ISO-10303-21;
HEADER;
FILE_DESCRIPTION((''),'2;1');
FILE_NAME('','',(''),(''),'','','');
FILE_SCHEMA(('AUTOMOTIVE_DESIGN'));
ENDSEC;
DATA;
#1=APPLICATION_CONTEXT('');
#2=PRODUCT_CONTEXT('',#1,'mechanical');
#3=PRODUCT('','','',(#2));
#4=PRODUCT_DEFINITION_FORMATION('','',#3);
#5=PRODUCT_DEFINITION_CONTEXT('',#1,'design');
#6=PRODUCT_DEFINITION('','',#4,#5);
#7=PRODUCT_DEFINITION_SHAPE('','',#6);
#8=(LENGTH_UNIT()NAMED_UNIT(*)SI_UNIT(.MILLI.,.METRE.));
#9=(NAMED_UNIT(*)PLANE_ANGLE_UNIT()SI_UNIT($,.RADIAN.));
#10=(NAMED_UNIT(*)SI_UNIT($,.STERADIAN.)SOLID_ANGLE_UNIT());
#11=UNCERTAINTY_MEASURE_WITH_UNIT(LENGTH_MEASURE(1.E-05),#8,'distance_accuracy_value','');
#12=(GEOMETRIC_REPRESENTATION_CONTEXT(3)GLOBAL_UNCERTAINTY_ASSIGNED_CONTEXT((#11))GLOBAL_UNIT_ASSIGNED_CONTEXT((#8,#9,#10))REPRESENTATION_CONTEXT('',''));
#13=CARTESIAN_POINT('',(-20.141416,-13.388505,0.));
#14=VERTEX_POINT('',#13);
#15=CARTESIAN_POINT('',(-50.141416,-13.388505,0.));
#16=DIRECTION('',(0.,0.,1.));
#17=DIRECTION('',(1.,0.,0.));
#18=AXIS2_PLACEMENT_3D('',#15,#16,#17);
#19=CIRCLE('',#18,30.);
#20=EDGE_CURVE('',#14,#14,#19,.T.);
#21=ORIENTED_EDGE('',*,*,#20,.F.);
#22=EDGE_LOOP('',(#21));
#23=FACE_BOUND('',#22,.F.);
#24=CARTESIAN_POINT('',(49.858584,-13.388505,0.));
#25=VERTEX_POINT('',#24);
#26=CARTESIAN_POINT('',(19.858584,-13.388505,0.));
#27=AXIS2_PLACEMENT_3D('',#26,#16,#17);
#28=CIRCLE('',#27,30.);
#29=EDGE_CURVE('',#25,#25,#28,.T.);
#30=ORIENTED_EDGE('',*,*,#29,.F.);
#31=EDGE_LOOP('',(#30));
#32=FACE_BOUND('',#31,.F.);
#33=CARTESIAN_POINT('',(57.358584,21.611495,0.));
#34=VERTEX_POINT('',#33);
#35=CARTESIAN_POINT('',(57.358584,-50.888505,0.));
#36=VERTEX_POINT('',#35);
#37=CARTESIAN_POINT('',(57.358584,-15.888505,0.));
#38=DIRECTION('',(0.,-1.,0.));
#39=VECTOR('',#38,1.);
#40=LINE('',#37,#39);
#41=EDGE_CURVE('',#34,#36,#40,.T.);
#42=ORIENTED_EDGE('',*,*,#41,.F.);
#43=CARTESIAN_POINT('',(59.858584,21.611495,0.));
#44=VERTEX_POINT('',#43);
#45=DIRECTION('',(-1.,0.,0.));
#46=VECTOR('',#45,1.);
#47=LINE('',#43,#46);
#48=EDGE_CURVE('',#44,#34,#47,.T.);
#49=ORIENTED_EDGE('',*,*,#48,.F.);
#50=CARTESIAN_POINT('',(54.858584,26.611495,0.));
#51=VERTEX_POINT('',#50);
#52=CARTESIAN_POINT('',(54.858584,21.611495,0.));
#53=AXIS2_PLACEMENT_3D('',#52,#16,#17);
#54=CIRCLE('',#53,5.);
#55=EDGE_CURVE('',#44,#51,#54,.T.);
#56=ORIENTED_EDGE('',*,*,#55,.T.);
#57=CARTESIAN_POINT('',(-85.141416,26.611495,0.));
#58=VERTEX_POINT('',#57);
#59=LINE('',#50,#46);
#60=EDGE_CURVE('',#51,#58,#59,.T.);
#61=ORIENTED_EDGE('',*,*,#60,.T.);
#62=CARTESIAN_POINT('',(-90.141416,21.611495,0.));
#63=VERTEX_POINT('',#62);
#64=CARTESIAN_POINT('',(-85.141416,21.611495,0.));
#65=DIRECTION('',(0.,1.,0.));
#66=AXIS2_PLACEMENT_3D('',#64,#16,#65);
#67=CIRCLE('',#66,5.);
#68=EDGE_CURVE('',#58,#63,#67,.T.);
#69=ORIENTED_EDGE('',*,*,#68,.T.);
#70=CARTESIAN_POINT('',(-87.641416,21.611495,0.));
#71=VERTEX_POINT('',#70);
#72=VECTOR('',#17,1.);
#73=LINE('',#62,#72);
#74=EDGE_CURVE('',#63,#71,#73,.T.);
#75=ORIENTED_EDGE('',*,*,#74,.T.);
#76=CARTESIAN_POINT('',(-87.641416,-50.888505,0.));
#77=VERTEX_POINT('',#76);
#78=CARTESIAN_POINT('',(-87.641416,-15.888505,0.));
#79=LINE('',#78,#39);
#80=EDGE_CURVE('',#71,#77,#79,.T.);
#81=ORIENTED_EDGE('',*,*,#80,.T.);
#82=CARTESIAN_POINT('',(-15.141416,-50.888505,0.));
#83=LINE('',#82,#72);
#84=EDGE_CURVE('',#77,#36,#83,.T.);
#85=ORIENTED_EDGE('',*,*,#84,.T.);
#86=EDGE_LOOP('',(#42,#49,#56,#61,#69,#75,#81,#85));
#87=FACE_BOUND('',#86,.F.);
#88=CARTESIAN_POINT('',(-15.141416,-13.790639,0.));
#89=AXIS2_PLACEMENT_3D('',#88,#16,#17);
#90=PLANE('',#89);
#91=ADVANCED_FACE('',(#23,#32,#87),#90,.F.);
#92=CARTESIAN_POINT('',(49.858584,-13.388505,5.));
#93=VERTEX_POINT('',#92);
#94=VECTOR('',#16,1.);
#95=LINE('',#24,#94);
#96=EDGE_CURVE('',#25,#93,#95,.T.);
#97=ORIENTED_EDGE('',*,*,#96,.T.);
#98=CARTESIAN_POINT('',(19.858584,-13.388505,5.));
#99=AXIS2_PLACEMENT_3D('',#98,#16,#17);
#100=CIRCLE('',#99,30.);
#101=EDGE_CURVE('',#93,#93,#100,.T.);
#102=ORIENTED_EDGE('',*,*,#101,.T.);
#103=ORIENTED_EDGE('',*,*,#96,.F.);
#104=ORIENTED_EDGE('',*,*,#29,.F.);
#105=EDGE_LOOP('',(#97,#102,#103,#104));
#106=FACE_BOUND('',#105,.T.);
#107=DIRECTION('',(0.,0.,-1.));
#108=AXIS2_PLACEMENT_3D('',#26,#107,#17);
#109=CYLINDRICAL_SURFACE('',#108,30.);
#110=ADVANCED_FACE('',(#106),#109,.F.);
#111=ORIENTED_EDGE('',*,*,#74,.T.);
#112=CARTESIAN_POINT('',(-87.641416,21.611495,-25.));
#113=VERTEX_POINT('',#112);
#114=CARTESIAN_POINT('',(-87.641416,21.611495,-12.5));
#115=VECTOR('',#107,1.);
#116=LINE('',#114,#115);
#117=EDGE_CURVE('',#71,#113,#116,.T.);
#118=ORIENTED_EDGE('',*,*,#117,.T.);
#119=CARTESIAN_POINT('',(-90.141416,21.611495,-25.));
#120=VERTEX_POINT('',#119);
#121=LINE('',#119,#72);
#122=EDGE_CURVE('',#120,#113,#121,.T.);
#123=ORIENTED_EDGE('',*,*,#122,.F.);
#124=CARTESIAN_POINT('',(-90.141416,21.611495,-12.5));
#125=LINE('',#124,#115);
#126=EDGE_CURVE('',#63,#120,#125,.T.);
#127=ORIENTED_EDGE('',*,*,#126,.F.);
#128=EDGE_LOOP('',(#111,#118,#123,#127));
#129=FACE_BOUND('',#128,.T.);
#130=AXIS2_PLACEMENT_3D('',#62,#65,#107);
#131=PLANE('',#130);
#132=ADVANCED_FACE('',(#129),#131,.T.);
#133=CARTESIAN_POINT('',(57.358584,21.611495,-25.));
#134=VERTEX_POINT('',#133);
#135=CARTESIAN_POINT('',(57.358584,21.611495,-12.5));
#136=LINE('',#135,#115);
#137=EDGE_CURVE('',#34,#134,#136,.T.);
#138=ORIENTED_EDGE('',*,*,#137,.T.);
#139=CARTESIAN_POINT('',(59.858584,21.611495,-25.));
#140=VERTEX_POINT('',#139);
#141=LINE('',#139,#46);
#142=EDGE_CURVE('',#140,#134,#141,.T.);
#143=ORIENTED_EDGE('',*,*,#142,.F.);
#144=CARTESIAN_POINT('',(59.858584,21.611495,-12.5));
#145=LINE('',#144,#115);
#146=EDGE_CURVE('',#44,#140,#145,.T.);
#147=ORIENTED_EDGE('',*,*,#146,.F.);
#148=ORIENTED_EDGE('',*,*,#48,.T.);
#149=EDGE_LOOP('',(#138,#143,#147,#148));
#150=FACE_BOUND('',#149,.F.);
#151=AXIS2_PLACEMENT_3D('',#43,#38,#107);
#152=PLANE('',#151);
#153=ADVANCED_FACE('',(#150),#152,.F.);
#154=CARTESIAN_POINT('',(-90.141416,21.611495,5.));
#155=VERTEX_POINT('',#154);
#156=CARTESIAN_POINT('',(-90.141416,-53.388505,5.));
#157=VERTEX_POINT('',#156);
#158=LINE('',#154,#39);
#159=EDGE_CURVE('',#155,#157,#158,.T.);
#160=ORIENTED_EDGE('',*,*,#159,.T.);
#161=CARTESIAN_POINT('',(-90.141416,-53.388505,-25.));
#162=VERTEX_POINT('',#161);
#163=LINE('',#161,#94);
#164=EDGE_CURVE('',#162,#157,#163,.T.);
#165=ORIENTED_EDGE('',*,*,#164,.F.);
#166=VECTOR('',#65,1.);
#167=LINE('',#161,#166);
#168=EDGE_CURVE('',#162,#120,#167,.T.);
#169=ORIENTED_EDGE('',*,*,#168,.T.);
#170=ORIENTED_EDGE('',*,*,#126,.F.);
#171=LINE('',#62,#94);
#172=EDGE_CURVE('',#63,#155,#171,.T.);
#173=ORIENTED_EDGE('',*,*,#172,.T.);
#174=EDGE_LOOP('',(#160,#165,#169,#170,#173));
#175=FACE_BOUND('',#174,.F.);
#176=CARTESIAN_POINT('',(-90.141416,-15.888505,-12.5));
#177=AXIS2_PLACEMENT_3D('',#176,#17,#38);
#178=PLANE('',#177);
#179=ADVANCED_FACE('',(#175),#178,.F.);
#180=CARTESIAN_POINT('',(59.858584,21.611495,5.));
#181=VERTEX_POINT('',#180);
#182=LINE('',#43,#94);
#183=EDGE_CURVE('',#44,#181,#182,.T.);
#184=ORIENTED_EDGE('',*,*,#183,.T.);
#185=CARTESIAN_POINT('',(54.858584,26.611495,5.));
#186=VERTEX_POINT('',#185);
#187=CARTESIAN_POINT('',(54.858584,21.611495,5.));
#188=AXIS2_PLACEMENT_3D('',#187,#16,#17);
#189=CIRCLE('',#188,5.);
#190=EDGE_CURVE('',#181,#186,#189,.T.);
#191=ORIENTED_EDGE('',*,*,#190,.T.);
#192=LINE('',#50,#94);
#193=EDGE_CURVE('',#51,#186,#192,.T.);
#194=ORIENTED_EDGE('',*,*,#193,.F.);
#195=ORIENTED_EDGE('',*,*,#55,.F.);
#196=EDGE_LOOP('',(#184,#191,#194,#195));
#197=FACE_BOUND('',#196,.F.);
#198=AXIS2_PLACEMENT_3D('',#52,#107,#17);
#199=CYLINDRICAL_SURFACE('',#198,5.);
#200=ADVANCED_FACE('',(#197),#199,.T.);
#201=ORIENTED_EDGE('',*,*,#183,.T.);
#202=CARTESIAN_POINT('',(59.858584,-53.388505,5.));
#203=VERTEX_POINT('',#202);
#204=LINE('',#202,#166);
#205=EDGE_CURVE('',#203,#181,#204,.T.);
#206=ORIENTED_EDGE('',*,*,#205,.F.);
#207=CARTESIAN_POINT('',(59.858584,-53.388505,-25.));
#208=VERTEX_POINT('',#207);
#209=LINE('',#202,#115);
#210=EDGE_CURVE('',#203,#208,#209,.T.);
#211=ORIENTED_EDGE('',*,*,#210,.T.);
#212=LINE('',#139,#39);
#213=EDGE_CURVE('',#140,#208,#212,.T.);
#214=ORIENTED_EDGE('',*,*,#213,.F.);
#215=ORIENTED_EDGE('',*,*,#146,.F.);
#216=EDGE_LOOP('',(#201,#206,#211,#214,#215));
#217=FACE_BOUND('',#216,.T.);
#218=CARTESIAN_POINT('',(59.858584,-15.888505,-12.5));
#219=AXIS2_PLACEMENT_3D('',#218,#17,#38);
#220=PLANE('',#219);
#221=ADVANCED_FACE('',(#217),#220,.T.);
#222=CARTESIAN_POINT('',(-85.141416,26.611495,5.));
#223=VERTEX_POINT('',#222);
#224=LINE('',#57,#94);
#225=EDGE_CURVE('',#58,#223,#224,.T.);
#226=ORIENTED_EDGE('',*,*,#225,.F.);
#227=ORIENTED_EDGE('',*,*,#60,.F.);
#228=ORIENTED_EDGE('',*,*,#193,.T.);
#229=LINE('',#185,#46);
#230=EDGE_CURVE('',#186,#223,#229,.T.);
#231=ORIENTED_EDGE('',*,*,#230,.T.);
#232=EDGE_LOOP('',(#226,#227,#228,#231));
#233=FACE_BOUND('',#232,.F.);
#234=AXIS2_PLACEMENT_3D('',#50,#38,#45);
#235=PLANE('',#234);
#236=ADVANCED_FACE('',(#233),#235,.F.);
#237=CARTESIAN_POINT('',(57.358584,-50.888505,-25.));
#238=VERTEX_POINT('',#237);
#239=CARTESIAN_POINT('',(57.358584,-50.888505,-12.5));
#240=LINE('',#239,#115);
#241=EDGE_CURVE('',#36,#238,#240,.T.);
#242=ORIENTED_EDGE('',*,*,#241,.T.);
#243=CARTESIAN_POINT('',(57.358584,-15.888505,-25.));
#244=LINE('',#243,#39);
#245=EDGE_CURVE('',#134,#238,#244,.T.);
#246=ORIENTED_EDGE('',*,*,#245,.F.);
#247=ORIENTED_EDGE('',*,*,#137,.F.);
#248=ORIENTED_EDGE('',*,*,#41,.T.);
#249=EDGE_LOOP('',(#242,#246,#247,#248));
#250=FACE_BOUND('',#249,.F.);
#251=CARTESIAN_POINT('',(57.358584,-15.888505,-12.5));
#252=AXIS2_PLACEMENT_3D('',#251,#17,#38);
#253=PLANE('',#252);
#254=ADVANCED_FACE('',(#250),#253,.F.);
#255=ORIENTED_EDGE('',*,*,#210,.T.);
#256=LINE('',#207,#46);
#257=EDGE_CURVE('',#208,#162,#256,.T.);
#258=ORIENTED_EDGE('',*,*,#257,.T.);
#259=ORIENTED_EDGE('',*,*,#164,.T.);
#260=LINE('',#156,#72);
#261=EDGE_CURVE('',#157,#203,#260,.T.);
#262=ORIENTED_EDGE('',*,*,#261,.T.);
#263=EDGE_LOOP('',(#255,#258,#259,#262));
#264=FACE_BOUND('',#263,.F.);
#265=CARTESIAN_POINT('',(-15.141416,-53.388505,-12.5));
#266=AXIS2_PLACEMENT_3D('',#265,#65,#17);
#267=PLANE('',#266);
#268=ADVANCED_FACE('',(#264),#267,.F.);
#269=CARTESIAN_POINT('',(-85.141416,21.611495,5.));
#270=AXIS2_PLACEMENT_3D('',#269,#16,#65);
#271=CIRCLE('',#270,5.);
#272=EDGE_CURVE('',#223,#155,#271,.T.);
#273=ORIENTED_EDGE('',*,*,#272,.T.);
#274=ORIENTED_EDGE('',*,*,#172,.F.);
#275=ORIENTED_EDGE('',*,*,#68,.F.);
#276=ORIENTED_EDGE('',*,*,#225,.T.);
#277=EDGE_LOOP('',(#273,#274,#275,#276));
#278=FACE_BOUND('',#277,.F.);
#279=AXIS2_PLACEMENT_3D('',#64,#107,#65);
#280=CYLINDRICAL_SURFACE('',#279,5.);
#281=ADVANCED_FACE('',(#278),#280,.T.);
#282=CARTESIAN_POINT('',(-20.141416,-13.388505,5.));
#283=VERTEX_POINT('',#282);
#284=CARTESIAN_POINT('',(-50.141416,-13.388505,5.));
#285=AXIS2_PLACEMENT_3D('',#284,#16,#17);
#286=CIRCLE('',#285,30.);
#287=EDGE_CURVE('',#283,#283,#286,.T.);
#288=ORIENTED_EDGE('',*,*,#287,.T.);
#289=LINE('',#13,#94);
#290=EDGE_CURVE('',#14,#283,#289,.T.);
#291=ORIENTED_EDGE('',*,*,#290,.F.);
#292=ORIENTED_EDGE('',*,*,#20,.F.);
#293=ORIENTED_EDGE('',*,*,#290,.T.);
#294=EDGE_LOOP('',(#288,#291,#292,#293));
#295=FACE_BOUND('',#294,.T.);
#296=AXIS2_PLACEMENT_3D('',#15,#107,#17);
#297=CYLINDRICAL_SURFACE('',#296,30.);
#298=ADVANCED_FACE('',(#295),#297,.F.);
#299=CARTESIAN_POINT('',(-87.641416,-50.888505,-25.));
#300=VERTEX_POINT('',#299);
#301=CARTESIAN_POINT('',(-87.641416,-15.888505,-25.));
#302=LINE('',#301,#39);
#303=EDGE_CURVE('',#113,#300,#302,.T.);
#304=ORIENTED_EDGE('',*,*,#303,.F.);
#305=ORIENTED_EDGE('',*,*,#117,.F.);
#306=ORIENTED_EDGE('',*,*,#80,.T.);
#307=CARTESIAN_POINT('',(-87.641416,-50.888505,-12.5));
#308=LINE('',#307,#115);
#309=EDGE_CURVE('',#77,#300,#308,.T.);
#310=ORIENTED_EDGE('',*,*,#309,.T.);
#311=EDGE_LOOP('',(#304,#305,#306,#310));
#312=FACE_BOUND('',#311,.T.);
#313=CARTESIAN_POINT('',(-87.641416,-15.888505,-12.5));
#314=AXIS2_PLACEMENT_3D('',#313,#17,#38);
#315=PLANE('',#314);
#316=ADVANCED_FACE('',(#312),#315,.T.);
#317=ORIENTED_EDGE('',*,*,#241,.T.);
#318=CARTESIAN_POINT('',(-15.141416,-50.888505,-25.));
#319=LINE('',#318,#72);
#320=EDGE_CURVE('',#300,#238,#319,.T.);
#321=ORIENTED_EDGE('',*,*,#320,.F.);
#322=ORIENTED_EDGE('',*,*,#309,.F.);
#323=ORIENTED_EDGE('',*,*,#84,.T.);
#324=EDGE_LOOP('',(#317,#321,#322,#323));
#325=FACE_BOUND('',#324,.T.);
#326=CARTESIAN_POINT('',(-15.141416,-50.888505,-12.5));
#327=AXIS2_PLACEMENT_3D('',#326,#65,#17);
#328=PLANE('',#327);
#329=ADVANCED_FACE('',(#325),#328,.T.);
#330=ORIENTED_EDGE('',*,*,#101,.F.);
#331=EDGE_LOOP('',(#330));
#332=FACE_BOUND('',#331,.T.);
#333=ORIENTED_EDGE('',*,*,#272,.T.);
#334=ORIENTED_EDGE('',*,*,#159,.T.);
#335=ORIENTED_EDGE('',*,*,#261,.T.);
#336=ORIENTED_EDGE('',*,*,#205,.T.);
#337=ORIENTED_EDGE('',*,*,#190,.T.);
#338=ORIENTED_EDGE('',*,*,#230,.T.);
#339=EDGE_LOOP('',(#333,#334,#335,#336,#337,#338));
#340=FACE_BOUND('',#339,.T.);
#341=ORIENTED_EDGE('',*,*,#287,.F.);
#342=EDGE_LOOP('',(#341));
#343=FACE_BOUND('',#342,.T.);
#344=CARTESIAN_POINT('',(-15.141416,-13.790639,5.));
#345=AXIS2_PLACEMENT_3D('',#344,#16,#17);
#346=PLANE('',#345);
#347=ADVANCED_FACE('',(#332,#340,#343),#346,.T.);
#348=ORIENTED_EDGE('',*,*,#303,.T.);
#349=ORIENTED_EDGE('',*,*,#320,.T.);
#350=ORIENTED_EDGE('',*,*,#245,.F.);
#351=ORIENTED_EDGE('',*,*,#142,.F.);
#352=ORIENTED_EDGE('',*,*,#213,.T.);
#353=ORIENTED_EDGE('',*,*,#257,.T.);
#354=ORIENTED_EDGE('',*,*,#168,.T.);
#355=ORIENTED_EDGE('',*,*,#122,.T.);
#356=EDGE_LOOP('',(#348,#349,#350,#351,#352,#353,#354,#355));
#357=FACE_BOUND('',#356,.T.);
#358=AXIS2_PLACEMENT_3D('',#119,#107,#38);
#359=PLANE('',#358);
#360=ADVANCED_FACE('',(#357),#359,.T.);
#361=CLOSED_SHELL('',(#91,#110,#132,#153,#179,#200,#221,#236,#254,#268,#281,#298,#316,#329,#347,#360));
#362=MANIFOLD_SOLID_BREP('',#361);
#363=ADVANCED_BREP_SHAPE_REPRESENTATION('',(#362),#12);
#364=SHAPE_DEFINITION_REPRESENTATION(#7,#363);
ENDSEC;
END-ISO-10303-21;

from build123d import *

# Parameters (mm, degrees)
F0_R          = 30
F2_DEPTH      = 5
F1_E0_TOP_W   = 150
F1_E0_TOP_H   = 25
F3_DEPTH      = 2.5
F5_E0_RIGHT_W = 75
F5_E0_RIGHT_H = 25
F6_DEPTH      = 2.5
F4_E0_LEFT_W  = 75
F4_E0_LEFT_H  = 25
F7_DEPTH      = 2.5


with BuildPart() as f2:
    # F0 (on Top) → F2 (new body)
    with BuildSketch(Plane.XY):
        with BuildLine():
            Line((54.8585835038, 26.6114953801), (-85.1414164962, 26.6114953801))
            ThreePointArc((-85.1414164962, 26.6114953801), (-88.6769504021, 25.1470292861), (-90.1414164962, 21.6114953801))
            Line((-90.1414164962, 21.6114953801), (-90.1414164962, -53.3885046199))
            Line((-90.1414164962, -53.3885046199), (59.8585835038, -53.3885046199))
            Line((59.8585835038, -53.3885046199), (59.8585835038, 21.6114953801))
            ThreePointArc((59.8585835038, 21.6114953801), (58.3941174097, 25.1470292861), (54.8585835038, 26.6114953801))
        make_face()
        with Locations((-50.1414164962, -13.3885046199)):
            Circle(F0_R, mode=Mode.SUBTRACT)
        with Locations((19.8585835038, -13.3885046199)):
            Circle(F0_R, mode=Mode.SUBTRACT)
    extrude(amount=F2_DEPTH)

    # F1_E0_top (on explicit) → F3 (join)
    with BuildSketch(Plane(origin=(-90.1414164962, -53.3885046199, 0), x_dir=(1, 0, 0), z_dir=(0, 1, 0))):
        with Locations((75, 12.5)):
            Rectangle(F1_E0_TOP_W, F1_E0_TOP_H)
    extrude(amount=F3_DEPTH)

    # F5_E0_right (on explicit) → F6 (join)
    with BuildSketch(Plane(origin=(59.8585835038, 21.6114953801, 0), x_dir=(0, -1, 0), z_dir=(1, 0, 0))):
        with Locations((37.5, 12.5)):
            Rectangle(F5_E0_RIGHT_W, F5_E0_RIGHT_H)
    extrude(amount=-F6_DEPTH)

    # F4_E0_left (on explicit) → F7 (join)
    with BuildSketch(Plane(origin=(-90.1414164962, 21.6114953801, 0), x_dir=(0, -1, 0), z_dir=(1, 0, 0))):
        with Locations((37.5, 12.5)):
            Rectangle(F4_E0_LEFT_W, F4_E0_LEFT_H)
    extrude(amount=F7_DEPTH)


solid = f2.part
